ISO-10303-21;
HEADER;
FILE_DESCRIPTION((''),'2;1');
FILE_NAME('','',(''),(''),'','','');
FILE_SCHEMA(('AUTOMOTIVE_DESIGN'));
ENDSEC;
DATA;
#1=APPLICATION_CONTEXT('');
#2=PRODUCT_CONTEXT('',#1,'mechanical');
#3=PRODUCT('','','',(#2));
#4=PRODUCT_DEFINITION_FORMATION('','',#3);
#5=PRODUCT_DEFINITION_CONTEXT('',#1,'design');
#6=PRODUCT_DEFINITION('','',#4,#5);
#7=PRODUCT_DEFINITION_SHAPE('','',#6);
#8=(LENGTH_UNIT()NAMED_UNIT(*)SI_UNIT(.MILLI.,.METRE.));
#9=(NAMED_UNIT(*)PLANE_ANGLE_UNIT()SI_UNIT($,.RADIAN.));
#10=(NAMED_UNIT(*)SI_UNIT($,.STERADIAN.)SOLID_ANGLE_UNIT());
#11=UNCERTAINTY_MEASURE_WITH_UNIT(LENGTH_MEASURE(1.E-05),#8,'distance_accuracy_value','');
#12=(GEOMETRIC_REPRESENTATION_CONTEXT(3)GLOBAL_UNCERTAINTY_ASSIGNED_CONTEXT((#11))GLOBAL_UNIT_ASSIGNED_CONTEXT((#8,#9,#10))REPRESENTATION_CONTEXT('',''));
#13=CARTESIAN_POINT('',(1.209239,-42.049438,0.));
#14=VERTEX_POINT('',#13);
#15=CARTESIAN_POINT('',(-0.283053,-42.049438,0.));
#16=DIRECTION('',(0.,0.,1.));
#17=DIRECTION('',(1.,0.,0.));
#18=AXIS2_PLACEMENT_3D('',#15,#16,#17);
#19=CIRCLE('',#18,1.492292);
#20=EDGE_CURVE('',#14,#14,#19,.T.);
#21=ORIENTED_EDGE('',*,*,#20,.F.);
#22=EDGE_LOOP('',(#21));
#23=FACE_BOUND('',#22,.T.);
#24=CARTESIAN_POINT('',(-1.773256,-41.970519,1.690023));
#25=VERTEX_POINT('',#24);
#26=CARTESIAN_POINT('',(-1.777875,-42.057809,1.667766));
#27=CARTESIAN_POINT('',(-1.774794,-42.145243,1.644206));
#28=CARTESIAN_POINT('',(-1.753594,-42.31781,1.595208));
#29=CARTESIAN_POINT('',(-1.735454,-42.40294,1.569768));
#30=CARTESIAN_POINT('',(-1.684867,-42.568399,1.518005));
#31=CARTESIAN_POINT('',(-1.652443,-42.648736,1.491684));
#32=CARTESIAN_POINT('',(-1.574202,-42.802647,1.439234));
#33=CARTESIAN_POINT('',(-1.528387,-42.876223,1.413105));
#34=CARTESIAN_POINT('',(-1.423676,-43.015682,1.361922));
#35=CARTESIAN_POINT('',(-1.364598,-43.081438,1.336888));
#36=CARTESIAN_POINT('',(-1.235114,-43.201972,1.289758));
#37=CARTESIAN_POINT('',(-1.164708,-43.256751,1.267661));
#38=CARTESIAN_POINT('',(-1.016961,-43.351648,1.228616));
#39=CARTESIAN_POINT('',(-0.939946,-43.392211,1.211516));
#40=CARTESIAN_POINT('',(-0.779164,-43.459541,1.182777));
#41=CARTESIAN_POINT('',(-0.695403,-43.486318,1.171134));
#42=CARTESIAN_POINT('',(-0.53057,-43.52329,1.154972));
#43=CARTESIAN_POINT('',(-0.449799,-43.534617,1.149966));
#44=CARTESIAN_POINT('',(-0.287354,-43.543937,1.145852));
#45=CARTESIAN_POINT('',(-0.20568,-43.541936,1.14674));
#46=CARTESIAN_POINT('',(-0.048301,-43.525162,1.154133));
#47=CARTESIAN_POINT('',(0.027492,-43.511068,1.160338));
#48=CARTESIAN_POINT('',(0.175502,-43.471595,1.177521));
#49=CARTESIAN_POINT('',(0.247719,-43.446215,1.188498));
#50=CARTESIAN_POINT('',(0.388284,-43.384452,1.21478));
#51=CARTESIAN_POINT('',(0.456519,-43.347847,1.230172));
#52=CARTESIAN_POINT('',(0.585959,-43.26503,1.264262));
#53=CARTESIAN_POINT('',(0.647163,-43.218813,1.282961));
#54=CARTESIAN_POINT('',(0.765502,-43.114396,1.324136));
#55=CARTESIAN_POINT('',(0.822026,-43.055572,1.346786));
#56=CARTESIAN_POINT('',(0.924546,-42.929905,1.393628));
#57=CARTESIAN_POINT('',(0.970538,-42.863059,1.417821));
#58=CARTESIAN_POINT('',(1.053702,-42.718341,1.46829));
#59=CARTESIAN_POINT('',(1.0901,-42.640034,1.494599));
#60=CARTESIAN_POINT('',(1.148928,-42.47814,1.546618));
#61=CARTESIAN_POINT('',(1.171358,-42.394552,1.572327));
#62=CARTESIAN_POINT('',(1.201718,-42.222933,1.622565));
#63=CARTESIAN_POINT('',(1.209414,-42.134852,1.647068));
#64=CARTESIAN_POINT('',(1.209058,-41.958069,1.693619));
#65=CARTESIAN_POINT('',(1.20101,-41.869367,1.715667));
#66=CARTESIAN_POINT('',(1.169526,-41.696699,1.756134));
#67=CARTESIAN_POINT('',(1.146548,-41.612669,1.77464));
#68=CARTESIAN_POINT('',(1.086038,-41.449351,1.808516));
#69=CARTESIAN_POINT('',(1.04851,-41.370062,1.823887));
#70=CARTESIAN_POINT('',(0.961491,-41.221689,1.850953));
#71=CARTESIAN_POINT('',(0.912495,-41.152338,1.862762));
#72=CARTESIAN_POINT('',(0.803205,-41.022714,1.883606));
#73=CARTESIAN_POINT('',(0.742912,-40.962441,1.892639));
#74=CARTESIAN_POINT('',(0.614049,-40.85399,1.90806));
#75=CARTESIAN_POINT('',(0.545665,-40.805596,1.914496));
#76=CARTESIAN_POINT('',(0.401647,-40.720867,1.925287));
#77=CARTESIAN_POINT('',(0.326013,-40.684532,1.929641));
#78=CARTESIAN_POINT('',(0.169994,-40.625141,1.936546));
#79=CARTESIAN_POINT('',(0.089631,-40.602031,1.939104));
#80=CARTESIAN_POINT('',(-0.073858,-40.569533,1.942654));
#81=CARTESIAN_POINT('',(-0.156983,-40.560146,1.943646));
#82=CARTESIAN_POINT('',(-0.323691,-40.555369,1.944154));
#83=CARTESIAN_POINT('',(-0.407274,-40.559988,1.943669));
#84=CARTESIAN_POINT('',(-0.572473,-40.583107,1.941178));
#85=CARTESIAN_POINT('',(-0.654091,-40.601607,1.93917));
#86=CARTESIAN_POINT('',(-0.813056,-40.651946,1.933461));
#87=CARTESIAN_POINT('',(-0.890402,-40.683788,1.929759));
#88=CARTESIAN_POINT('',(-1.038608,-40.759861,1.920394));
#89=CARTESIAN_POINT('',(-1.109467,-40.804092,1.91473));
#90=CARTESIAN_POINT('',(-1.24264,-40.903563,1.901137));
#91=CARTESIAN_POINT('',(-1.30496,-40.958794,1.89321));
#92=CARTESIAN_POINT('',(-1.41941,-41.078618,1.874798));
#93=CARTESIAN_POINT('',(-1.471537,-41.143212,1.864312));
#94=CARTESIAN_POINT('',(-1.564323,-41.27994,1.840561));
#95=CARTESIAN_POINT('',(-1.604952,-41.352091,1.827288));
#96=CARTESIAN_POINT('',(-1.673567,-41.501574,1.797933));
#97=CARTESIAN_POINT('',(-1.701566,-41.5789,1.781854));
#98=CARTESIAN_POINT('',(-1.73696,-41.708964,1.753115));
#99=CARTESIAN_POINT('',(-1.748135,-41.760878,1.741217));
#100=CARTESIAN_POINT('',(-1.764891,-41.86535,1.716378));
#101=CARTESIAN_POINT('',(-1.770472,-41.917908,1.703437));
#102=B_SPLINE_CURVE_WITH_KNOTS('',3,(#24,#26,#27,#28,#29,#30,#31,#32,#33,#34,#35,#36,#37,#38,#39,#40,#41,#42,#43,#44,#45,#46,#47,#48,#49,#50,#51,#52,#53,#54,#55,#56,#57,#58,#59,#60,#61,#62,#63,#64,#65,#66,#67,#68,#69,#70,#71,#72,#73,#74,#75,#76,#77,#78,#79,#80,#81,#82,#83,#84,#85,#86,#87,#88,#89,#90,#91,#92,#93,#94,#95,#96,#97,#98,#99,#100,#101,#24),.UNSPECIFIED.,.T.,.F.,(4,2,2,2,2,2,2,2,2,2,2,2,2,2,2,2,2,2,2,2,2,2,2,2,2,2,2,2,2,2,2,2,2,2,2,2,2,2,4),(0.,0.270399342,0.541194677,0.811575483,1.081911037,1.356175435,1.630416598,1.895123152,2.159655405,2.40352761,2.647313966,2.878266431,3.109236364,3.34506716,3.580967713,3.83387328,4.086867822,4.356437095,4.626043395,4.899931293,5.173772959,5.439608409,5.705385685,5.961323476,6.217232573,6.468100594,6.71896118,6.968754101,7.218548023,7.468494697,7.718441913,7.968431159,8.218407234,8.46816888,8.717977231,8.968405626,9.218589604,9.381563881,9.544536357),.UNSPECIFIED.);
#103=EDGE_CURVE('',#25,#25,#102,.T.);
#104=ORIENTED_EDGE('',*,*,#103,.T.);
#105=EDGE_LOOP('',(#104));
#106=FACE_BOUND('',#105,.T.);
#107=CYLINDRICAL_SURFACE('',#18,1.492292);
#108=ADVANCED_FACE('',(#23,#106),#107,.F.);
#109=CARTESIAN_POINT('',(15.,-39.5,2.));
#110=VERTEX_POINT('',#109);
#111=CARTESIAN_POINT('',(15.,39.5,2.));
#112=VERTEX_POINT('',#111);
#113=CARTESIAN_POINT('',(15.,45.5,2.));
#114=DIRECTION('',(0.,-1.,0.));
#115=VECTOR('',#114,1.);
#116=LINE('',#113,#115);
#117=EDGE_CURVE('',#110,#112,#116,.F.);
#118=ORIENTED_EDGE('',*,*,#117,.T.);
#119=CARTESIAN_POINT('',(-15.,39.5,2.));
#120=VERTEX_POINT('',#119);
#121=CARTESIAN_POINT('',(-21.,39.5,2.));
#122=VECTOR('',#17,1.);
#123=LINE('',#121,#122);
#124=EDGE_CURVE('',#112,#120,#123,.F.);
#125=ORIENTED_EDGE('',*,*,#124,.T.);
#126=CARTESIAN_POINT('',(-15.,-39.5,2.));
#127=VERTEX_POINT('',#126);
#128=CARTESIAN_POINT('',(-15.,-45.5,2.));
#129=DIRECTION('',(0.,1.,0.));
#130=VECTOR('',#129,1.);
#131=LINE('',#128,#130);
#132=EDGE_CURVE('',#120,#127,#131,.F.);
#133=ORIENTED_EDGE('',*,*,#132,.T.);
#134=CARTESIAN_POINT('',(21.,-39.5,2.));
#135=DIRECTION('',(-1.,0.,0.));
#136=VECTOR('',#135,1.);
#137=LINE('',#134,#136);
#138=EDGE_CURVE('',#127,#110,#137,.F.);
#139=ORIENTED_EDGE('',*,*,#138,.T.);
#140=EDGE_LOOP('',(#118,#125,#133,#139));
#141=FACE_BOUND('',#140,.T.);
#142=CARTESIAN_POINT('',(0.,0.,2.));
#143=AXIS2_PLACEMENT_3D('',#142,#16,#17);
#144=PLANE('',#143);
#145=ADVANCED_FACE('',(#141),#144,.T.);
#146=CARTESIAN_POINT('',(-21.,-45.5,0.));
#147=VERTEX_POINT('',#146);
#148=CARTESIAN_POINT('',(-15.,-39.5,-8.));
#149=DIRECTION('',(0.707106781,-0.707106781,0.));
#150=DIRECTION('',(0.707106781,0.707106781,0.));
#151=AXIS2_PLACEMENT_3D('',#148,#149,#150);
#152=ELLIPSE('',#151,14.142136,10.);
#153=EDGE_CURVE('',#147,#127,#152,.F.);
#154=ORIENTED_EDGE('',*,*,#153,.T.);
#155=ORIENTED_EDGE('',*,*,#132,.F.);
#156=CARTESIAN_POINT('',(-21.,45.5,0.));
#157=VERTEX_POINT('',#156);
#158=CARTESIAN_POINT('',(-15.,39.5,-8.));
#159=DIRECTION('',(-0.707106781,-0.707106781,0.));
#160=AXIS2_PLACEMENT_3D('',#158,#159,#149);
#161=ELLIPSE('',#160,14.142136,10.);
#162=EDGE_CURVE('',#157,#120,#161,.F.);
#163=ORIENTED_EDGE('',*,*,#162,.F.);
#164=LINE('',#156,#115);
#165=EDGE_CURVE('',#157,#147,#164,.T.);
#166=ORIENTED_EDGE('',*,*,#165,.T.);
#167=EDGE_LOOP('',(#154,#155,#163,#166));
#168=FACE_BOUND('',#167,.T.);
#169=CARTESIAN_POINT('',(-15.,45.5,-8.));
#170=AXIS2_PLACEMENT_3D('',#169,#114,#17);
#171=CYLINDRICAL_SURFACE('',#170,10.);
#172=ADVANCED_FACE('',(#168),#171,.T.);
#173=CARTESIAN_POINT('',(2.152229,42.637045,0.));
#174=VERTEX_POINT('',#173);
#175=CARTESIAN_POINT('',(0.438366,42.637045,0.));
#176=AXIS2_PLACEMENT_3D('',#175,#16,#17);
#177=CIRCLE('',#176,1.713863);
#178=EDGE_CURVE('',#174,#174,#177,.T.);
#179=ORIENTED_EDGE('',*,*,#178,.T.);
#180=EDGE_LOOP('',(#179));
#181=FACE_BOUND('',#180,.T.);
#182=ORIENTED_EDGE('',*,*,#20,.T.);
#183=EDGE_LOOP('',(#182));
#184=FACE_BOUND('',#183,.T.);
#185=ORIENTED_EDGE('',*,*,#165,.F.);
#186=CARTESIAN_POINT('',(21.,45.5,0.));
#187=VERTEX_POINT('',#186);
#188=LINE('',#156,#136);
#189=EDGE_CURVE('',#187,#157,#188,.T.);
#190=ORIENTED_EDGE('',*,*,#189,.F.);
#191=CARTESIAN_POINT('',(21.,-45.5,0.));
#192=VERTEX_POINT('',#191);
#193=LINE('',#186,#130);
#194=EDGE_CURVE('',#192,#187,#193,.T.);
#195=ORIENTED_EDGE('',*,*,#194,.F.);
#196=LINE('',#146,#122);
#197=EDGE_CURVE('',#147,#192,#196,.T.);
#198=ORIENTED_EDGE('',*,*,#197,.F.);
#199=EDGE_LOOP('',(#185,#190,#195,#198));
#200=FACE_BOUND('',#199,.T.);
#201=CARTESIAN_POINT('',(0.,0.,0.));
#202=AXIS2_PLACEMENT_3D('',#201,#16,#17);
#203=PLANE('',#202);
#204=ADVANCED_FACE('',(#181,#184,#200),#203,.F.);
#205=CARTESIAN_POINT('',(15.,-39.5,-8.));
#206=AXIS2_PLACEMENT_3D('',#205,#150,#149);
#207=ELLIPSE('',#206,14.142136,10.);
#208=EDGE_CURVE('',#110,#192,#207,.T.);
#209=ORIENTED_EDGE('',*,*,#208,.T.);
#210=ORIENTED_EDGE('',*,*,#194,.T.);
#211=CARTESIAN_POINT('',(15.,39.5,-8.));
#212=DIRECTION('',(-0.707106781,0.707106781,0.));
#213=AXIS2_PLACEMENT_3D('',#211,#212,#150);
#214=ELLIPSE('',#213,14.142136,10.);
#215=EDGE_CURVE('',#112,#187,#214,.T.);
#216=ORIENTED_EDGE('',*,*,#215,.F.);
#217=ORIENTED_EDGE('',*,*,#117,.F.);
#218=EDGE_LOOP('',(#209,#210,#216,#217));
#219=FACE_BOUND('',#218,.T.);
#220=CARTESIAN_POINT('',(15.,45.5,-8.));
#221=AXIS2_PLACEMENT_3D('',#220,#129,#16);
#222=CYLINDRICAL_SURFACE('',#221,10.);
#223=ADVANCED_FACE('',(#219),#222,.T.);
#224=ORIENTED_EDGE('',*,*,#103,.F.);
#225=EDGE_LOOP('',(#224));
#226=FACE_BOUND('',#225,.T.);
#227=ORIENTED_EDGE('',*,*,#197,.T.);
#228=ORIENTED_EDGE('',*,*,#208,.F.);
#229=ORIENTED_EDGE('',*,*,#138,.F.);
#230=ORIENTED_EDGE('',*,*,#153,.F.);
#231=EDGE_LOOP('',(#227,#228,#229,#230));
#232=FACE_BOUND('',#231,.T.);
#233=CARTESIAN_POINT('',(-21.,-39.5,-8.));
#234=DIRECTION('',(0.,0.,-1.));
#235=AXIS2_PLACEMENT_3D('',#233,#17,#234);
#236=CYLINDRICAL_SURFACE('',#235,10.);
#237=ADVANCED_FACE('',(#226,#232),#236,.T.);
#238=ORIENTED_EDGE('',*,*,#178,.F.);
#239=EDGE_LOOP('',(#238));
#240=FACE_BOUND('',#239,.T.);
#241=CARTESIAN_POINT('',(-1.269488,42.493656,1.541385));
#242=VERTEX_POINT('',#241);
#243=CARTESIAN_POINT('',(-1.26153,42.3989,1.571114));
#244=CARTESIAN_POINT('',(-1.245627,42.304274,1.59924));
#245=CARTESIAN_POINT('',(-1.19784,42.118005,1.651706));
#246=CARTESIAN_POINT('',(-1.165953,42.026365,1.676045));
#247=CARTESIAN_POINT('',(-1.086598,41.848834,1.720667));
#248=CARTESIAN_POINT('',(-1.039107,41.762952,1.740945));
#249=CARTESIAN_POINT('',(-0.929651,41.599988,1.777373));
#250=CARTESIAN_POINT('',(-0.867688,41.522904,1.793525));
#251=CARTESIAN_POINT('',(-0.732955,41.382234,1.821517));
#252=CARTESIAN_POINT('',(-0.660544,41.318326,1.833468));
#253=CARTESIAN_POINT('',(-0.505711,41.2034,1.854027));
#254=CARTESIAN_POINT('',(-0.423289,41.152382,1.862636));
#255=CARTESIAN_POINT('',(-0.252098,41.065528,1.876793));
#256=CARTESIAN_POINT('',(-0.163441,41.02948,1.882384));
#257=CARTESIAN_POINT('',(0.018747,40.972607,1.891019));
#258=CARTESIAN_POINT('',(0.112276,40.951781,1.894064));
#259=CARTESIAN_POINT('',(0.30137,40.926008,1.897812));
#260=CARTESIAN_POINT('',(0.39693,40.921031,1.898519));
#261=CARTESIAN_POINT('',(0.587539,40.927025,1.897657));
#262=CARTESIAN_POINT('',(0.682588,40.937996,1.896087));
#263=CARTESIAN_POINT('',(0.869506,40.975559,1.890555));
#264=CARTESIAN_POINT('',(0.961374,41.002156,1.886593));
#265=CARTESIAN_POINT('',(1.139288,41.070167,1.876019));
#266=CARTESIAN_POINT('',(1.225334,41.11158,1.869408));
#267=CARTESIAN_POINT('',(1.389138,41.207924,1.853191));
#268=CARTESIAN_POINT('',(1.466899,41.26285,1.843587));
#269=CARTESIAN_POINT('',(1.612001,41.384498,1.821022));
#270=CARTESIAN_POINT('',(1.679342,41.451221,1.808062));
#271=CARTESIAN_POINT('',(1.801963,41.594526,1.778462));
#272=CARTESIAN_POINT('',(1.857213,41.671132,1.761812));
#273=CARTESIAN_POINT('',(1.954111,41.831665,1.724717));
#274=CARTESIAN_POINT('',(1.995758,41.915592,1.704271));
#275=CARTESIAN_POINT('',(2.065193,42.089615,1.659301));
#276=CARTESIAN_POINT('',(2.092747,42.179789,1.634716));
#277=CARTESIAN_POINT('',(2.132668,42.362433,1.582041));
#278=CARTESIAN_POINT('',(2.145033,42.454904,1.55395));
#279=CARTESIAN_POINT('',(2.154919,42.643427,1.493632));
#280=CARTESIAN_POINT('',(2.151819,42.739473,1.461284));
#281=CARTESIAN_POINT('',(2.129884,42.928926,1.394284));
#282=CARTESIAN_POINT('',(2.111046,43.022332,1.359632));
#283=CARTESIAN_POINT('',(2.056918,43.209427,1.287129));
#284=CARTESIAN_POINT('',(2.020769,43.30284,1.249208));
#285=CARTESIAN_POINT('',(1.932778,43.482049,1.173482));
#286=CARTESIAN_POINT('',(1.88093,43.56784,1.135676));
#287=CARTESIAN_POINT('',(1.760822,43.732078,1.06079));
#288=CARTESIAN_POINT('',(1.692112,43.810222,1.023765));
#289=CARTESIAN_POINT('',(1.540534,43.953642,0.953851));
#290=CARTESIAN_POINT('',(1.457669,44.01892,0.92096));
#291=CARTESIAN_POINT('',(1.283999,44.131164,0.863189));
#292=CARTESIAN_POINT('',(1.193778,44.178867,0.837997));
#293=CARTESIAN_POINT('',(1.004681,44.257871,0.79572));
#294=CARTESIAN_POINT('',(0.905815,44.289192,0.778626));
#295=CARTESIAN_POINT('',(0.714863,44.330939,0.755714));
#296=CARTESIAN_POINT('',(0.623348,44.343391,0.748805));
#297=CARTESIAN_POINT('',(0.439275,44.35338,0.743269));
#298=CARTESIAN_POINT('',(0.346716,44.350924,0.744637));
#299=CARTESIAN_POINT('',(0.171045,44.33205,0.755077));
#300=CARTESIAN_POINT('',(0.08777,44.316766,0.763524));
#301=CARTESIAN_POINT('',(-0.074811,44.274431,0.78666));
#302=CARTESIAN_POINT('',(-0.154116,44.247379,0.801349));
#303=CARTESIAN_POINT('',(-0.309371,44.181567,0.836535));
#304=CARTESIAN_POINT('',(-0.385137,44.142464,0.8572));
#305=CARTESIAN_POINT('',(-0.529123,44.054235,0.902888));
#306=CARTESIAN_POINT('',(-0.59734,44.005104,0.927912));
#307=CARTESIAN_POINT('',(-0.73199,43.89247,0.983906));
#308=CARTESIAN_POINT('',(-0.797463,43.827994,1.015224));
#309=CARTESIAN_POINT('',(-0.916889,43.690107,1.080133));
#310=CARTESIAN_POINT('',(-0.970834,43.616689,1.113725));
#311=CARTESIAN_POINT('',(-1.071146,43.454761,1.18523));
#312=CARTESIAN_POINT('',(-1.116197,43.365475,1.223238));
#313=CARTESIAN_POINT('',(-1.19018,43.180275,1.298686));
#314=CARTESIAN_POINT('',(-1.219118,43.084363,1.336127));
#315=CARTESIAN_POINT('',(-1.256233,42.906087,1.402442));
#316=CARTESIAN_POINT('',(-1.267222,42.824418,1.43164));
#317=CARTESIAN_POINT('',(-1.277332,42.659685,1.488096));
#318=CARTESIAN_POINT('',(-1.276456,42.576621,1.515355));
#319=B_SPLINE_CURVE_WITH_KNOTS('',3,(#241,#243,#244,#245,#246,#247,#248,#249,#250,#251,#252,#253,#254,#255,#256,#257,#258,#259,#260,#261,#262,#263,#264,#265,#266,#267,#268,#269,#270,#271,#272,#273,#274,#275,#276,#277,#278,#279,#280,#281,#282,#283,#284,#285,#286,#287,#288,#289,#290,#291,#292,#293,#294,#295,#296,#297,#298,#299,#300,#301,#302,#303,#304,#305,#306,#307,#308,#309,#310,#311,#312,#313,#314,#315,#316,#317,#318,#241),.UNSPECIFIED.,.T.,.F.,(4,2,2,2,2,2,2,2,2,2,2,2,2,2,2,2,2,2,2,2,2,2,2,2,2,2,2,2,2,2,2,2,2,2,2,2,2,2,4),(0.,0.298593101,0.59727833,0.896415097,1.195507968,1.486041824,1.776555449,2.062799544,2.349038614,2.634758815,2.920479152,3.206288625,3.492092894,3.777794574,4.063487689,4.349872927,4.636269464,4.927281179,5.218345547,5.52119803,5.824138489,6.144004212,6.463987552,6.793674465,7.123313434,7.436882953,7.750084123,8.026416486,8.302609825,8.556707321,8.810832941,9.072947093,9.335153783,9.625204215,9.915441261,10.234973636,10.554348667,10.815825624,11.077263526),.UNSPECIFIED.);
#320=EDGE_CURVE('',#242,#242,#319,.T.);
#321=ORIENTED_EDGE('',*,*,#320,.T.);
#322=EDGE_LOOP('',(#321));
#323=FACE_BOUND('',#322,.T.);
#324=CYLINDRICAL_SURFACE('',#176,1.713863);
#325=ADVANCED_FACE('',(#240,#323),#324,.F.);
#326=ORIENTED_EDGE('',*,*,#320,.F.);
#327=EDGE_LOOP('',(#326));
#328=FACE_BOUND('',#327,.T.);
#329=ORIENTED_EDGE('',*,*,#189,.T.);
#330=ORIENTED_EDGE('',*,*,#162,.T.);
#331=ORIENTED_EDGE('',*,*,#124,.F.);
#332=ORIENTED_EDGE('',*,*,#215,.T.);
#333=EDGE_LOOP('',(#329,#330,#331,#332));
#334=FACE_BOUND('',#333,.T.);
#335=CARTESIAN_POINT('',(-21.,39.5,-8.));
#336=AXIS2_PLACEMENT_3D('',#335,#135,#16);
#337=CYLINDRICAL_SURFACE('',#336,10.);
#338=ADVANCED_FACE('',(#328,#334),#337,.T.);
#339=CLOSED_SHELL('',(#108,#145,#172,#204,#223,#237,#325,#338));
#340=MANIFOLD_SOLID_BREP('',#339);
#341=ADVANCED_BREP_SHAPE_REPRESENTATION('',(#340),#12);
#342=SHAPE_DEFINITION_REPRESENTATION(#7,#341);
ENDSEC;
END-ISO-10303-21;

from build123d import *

# Parameters (mm, degrees)
SKETCH1_W           = 42
SKETCH1_H           = 91
BOSS_EXTRUDE1_DEPTH = 2
SKETCH2_R           = 1.492291875
SKETCH2_R_2         = 1.71386304
CUT_EXTRUDE1_DEPTH  = 2
FILLET1_R           = 10


with BuildPart() as part:
    # Sketch1 → Boss-Extrude1 (new body)
    with BuildSketch(Plane.XY):
        Rectangle(SKETCH1_W, SKETCH1_H)
    extrude(amount=BOSS_EXTRUDE1_DEPTH)

    # Sketch2 → Cut-Extrude1 (cut)
    with BuildSketch(Plane.XY.offset(2)):
        with Locations((-0.283052716, -42.049438223)):
            Circle(SKETCH2_R)
        with Locations((0.438366209, 42.637044582)):
            Circle(SKETCH2_R_2)
    extrude(amount=-CUT_EXTRUDE1_DEPTH, mode=Mode.SUBTRACT)

    # Fillet1
    # the kernel refuses this fillet: 10 mm, written as the material it takes off along each edge
    with BuildSketch(Plane(origin=(-36, 45.5, 2), x_dir=(0, 0, -1), z_dir=(1, 0, 0))) as fillet1_piece_1:
        with BuildLine():
            CenterArc((10, -6), FILLET1_R, 143.130102354, 36.869897646)
            Line((0, -6), (-0.2, -6))
            Line((-0.2, -6), (-0.2, 0))
            Line((-0.2, 0), (0, 0.2))
            ThreePointArc((0, 0.2), (1, 0.2), (1.84, 0.12))
            Line((1.84, 0.12), (2, 0))
        make_face()
    extrude(amount=72, mode=Mode.SUBTRACT)
    with BuildSketch(Plane(origin=(-21, -60.5, 2), x_dir=(0, 0, -1), z_dir=(0, 1, 0)), Plane(origin=(21, 60.5, 2), x_dir=(0, 0, -1), z_dir=(0, -1, 0))) as fillet1_piece_2:
        with BuildLine():
            CenterArc((10, -6), FILLET1_R, 143.130102354, 36.869897646)
            Line((0, -6), (-0.2, -6))
            Line((-0.2, -6), (-0.2, 0))
            Line((-0.2, 0), (0, 0.2))
            ThreePointArc((0, 0.2), (1, 0.2), (1.84, 0.12))
            Line((1.84, 0.12), (2, 0))
        make_face()
    extrude(amount=121, mode=Mode.SUBTRACT)
    with BuildSketch(Plane(origin=(36, -45.5, 2), x_dir=(0, 1, 0), z_dir=(-1, 0, 0))) as fillet1_piece_3:
        with BuildLine():
            CenterArc((6, 10), FILLET1_R, 233.130102354, 36.869897646)
            Line((0, 2), (-0.12, 1.84))
            ThreePointArc((-0.12, 1.84), (-0.2, 1), (-0.2, 0))
            Line((-0.2, 0), (0, -0.2))
            Line((0, -0.2), (6, -0.2))
            Line((6, -0.2), (6, 0))
        make_face()
    extrude(amount=72, mode=Mode.SUBTRACT)


solid = part.part
